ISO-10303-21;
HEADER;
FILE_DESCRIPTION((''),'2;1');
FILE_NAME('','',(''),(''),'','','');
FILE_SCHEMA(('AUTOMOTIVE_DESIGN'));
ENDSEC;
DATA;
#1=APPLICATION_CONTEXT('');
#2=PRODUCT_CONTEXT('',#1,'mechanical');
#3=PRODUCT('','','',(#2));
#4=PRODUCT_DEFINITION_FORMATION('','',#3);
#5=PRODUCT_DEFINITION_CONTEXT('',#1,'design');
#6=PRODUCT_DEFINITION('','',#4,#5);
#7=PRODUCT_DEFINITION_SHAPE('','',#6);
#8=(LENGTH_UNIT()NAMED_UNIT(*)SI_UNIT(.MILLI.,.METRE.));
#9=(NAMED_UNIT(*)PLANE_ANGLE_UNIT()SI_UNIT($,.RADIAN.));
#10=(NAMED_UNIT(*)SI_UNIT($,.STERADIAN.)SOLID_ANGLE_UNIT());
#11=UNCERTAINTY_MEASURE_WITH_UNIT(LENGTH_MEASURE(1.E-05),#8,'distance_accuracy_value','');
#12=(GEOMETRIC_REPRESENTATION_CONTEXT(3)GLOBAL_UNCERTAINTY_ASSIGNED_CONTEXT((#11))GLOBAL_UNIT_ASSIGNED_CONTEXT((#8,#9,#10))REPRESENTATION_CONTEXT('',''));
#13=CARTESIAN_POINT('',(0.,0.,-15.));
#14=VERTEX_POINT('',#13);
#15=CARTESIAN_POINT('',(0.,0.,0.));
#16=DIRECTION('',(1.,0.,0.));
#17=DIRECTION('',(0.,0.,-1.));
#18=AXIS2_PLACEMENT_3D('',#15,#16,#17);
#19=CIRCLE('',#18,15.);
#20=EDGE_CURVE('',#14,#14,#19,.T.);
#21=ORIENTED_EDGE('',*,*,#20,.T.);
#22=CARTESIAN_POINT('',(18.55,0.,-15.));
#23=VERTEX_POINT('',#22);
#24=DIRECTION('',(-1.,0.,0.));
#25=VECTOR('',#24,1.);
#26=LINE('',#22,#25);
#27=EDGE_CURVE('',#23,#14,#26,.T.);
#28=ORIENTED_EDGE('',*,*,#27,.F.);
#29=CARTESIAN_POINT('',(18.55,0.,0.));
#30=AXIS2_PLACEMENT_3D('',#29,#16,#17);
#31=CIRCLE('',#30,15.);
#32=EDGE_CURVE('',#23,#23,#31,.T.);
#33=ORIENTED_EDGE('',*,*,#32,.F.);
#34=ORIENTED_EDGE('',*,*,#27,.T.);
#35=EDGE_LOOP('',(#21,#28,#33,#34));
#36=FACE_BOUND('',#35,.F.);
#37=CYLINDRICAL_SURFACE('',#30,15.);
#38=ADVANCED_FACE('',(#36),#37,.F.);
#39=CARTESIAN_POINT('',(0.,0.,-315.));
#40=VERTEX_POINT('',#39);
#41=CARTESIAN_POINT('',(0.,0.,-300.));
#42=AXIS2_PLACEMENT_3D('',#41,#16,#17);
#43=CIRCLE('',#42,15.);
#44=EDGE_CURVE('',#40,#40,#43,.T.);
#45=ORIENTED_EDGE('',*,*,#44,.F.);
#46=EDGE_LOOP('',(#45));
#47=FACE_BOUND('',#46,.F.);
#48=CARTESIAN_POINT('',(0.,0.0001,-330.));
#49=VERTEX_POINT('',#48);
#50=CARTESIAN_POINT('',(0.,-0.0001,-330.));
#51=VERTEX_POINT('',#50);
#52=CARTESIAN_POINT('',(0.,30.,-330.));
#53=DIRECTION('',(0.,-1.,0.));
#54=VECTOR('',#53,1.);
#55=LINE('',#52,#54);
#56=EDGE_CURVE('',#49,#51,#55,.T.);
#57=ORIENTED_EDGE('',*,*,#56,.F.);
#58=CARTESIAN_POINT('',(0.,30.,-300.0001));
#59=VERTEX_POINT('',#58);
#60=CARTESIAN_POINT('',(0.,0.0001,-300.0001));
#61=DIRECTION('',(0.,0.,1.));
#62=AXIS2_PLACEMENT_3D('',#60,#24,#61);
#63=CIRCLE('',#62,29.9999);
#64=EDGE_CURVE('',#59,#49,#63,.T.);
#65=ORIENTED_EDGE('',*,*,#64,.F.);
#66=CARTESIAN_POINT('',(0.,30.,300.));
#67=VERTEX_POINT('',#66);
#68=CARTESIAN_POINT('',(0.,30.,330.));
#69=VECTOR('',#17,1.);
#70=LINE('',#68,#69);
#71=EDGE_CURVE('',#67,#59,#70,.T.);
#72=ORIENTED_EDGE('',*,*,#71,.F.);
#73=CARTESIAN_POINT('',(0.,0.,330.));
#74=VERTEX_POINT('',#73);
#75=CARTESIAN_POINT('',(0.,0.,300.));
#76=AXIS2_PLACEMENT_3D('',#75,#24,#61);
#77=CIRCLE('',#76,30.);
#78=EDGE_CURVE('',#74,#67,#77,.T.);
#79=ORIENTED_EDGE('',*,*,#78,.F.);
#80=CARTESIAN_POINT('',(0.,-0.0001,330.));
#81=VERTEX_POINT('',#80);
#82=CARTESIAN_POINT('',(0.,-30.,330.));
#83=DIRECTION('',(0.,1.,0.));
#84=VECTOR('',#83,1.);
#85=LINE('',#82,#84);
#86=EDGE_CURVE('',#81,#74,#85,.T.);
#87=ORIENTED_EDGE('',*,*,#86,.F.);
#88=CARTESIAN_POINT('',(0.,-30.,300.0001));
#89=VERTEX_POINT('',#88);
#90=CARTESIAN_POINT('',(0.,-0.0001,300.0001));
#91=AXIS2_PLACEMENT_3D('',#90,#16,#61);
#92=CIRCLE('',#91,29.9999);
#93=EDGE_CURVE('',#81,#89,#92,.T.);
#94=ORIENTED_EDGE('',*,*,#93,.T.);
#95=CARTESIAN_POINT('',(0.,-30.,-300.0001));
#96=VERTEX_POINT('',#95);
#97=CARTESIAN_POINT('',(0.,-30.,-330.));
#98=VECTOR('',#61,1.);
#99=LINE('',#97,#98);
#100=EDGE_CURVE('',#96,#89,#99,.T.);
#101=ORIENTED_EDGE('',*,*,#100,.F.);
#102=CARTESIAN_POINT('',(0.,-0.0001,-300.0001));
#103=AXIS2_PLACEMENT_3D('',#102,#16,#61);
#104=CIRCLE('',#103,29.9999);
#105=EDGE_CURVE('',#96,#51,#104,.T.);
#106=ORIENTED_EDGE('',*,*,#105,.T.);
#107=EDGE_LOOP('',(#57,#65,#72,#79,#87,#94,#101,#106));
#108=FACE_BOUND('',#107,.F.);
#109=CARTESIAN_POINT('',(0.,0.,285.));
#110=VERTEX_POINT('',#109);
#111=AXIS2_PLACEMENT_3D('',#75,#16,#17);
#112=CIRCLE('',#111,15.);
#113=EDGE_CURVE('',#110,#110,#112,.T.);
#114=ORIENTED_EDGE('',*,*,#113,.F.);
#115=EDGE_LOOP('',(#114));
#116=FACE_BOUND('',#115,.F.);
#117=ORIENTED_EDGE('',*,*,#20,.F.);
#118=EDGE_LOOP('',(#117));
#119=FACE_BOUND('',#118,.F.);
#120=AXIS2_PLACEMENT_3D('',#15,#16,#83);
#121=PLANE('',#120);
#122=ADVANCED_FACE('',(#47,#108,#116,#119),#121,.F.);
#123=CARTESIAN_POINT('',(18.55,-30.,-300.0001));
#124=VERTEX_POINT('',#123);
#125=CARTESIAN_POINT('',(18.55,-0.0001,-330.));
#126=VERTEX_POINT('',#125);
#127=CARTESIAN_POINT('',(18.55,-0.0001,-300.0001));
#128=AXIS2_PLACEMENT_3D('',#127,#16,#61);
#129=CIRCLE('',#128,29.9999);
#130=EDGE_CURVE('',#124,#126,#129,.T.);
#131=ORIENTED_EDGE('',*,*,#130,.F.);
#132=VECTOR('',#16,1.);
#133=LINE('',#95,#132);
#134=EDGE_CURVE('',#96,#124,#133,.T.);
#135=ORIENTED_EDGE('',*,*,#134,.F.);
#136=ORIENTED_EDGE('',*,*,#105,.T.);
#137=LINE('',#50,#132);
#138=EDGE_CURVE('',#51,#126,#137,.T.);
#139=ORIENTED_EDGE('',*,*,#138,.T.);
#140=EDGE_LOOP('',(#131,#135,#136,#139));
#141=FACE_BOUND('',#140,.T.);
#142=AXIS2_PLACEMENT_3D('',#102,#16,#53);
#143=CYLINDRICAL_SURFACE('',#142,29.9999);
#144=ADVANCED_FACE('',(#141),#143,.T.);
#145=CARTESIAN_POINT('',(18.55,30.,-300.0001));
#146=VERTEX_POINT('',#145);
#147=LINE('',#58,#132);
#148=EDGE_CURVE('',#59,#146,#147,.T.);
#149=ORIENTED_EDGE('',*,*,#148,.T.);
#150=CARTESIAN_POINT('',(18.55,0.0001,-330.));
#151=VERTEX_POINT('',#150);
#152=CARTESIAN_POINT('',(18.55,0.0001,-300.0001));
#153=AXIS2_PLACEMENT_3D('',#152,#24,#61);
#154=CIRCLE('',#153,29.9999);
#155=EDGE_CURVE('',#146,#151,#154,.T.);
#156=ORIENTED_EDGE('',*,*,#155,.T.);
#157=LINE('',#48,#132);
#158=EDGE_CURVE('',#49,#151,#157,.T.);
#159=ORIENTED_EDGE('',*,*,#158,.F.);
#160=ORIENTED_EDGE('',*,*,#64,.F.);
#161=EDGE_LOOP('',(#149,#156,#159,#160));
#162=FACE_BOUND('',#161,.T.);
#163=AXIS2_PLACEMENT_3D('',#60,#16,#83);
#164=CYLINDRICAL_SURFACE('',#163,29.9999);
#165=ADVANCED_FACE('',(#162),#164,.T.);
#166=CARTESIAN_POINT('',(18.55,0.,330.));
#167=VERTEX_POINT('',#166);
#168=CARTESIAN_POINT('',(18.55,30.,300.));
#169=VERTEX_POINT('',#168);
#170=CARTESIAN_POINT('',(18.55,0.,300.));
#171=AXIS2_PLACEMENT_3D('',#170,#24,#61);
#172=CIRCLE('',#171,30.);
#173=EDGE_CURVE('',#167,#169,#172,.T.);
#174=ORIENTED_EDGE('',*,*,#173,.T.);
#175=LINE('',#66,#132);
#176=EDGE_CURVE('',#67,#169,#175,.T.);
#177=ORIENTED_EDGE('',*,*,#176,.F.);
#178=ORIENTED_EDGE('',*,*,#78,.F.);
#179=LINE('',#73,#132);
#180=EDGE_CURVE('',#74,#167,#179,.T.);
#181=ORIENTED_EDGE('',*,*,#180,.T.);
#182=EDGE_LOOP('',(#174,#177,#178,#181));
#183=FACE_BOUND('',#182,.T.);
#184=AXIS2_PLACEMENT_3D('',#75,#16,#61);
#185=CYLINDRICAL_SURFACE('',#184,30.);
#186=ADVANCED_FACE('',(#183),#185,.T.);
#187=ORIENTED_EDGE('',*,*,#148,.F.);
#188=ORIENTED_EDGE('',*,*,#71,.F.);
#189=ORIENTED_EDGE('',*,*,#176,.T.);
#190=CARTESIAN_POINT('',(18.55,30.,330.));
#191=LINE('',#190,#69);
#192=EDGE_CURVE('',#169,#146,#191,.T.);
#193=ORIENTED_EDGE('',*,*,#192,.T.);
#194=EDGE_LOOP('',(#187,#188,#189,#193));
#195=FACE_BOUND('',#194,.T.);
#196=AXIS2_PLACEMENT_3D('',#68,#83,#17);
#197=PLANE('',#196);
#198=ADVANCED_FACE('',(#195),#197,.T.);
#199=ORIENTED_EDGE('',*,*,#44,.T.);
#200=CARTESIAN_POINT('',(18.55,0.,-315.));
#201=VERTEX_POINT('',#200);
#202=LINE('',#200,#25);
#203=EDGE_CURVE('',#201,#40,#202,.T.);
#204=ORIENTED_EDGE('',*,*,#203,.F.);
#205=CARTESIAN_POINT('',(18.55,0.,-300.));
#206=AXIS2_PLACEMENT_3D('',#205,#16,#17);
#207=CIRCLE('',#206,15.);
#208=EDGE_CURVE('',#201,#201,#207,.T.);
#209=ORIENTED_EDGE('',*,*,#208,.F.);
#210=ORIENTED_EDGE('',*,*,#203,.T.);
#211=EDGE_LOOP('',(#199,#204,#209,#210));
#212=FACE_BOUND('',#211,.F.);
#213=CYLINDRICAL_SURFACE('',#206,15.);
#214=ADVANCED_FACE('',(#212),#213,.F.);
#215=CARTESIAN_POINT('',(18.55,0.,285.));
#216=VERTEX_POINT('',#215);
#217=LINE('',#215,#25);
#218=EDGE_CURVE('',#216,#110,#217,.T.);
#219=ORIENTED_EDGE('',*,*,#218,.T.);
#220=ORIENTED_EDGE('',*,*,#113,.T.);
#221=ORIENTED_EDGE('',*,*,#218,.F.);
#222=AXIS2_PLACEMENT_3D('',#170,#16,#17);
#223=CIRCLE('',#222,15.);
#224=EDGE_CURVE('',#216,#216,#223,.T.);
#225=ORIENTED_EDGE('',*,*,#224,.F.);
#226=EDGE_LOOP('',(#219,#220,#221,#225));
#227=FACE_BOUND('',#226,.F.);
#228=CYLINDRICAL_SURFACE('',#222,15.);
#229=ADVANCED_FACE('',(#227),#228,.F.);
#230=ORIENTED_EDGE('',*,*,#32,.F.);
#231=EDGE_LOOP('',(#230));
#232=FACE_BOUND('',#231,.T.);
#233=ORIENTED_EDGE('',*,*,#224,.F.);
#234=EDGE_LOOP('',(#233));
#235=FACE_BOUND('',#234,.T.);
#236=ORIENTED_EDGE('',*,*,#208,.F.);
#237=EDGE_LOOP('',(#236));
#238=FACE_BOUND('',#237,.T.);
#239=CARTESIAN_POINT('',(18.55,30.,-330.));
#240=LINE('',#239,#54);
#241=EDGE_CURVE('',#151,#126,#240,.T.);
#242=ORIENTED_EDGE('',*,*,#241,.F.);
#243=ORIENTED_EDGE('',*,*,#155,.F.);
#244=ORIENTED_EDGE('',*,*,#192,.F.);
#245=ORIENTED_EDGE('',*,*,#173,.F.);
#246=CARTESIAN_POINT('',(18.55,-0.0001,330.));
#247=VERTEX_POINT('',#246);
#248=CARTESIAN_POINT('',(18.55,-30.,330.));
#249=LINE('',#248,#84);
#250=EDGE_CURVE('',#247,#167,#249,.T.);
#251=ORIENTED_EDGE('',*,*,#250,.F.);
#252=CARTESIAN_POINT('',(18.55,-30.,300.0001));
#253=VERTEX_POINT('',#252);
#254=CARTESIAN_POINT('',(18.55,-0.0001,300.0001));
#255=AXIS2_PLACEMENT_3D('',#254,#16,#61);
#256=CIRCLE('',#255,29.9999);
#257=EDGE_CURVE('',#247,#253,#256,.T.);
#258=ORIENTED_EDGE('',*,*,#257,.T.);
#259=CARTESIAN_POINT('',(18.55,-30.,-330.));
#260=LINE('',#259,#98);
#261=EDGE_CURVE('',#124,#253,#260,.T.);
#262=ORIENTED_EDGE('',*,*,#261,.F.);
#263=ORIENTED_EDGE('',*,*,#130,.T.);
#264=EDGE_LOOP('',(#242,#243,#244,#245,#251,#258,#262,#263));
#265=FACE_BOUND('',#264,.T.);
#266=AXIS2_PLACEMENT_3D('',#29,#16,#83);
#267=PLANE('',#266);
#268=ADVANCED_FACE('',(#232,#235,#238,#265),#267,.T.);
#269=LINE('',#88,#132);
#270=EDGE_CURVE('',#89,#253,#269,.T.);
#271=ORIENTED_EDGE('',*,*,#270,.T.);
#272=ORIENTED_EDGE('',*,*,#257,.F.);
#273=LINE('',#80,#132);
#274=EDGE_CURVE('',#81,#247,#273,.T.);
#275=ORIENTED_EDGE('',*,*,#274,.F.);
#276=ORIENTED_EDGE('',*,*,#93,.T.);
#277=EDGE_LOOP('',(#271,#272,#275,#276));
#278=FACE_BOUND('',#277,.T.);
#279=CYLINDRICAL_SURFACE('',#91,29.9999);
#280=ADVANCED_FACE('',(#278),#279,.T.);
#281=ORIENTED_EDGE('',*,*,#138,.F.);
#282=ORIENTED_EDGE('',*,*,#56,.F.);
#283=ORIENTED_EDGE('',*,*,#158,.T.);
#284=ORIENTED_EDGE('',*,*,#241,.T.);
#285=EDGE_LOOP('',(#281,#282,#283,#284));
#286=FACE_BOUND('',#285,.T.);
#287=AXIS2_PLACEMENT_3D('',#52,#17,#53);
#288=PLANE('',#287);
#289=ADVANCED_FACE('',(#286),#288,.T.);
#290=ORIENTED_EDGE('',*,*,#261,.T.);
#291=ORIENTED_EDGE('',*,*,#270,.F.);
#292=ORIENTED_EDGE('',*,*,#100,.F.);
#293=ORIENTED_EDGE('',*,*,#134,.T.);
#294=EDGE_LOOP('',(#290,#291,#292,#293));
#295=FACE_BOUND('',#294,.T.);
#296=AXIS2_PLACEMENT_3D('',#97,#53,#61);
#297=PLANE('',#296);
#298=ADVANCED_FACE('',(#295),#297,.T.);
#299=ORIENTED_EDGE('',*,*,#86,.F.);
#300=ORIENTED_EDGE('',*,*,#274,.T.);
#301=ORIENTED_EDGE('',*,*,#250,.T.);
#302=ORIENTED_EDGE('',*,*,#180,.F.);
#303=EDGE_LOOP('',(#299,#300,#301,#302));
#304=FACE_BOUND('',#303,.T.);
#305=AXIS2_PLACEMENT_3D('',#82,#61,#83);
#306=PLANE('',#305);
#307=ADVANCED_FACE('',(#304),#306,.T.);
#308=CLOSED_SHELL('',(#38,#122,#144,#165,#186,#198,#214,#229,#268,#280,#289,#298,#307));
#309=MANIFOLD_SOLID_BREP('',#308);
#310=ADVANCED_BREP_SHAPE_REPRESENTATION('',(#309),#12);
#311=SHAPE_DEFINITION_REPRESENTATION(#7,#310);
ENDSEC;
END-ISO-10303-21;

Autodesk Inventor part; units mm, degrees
ref_plane "YZ Plane" through (0, 0, 0) normal (1, 0, 0) x (0, 1, 0)
ref_plane "XZ Plane" through (0, 0, 0) normal (0, 1, 0) x (-1, 0, 0)
ref_plane "XY Plane" through (0, 0, 0) normal (0, 0, 1) x (1, 0, 0)
sketch "Esquisse1" plane through (0, 0, 0) normal (1, 0, 0) x (0, 1, 0)
  line L0 (-30, 330) -> (30, 330)
  line L1 (30, 330) -> (30, -330)
  line L2 (30, -330) -> (-30, -330)
  line L3 (-30, -330) -> (-30, 330)
  line L4 (-30, 330) -> (30, -330) construction
  line L5 (30, 330) -> (-30, -330) construction
  point P0 (0, 0)
  dimension "d0" = 660
  dimension "d1" = 60
extrude "Extrusion1" add sketch "Esquisse1" along normal blind 18.55
sketch "Esquisse2" plane through (18.55, 0, 0) normal (1, 0, 0) x (0, 0, -1)
  circle A0 centre (-300, 0) radius 15
  circle A1 centre (0, 0) radius 15
  circle A2 centre (300, 0) radius 15
  line L0 (330, -30) -> (330, 30) projected
  line L1 (-330, 30) -> (-330, -30) projected
  line L2 (-330, 0) -> (330, 0) construction
  dimension "d4" = 30
  dimension "d5" = 30
  dimension "d6" = 30
extrude "Extrusion2" cut sketch "Esquisse2" against normal blind 18.55
fillet "Congé1" radius 30 1 edges at (9.275, 30, 330)
fillet "Congé2" radius 30 3 edges at (9.275, -30, 330) (9.275, 30, -330) (9.275, -30, -330)
properties part number "foot"
